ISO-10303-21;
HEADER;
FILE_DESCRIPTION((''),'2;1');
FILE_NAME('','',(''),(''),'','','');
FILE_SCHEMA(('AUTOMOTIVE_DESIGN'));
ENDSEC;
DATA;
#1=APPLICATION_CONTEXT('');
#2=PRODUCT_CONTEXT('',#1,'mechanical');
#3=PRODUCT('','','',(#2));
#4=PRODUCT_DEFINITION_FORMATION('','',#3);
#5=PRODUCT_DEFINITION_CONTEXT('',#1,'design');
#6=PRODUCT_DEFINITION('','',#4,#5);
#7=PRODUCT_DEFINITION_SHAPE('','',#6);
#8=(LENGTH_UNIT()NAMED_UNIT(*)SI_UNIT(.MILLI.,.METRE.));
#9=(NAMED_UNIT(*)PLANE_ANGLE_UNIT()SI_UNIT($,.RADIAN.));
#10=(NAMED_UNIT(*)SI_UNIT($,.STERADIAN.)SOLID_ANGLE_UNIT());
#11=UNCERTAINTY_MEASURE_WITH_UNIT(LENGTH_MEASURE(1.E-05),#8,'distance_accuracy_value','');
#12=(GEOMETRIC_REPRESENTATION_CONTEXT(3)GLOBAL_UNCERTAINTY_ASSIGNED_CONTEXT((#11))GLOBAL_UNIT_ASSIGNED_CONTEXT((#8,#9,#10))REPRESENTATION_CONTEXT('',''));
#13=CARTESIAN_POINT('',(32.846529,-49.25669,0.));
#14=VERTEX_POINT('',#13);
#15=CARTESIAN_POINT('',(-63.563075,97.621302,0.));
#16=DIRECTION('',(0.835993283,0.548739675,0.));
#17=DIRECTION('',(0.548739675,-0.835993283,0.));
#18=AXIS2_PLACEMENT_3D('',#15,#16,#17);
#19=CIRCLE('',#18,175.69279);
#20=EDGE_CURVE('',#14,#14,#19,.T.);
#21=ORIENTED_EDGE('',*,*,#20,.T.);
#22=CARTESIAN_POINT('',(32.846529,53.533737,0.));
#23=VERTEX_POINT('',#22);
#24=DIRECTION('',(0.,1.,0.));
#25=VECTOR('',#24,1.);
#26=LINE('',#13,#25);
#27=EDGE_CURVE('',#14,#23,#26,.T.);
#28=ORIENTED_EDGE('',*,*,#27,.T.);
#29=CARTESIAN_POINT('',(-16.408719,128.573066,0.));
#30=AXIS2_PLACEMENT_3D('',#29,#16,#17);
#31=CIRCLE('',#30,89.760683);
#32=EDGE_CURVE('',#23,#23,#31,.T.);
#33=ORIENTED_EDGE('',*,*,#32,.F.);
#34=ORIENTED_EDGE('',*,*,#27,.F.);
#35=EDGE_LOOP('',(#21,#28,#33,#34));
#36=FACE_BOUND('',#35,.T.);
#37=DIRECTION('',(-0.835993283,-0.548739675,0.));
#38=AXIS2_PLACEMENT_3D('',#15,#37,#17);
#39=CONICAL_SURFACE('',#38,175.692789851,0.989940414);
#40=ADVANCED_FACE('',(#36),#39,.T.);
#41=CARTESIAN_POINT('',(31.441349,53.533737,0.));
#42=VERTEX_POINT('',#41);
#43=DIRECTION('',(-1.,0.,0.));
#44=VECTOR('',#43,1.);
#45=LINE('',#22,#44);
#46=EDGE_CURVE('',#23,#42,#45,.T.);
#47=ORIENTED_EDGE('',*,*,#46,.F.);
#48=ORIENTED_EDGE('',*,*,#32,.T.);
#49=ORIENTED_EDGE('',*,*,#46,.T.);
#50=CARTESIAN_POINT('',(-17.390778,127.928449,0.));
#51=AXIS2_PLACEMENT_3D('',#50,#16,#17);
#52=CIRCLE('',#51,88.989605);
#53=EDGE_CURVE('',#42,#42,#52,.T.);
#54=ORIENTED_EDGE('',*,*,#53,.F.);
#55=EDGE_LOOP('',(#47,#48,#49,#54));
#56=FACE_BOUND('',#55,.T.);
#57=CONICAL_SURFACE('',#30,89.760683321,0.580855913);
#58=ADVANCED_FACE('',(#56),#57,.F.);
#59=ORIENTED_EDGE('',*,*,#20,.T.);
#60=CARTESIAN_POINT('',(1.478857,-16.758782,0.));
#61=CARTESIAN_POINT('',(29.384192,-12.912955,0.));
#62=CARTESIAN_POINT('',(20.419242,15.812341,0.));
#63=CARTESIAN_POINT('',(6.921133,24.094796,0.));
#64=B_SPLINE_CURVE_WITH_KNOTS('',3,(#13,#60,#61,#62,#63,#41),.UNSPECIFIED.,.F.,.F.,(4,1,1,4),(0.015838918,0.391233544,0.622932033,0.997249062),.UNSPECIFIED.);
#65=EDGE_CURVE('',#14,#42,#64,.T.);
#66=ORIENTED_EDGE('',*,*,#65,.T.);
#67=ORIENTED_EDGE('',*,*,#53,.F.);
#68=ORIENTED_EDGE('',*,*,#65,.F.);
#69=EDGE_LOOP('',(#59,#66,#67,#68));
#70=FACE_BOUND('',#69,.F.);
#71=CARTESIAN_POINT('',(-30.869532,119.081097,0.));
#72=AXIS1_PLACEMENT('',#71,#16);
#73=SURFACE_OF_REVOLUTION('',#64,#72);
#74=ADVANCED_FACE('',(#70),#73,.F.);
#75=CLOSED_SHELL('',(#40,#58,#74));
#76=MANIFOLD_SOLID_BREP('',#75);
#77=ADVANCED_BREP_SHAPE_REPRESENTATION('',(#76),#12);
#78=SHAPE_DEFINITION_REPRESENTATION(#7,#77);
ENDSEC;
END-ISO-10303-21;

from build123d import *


with BuildPart() as f1:
    # F0 (on Top) → F1 (revolve)
    with BuildSketch(Plane.XY):
        with BuildLine():
            add(Edge.make_bspline(
                [(32.8465292277, -49.2566897612), (1.4788567079, -16.758781622), (29.3841917522, -12.91295474), (20.4192424175, 15.812341124), (6.9211326633, 24.0947962118), (31.4413485281, 53.533737281)],
                knots=[0.0158389184, 0.0158389184, 0.0158389184, 0.0158389184, 0.3912335435, 0.6229320327, 0.9972490619, 0.9972490619, 0.9972490619, 0.9972490619], degree=3))
            Line((32.8465292277, -49.2566897612), (32.8465292277, 53.533737281))
            Line((32.8465292277, 53.533737281), (31.4413485281, 53.533737281))
        make_face()
    revolve(axis=Axis((-30.8695323067, 119.0810969722, 0), (0.8359932827, 0.5487396754, 0)))


solid = f1.part
